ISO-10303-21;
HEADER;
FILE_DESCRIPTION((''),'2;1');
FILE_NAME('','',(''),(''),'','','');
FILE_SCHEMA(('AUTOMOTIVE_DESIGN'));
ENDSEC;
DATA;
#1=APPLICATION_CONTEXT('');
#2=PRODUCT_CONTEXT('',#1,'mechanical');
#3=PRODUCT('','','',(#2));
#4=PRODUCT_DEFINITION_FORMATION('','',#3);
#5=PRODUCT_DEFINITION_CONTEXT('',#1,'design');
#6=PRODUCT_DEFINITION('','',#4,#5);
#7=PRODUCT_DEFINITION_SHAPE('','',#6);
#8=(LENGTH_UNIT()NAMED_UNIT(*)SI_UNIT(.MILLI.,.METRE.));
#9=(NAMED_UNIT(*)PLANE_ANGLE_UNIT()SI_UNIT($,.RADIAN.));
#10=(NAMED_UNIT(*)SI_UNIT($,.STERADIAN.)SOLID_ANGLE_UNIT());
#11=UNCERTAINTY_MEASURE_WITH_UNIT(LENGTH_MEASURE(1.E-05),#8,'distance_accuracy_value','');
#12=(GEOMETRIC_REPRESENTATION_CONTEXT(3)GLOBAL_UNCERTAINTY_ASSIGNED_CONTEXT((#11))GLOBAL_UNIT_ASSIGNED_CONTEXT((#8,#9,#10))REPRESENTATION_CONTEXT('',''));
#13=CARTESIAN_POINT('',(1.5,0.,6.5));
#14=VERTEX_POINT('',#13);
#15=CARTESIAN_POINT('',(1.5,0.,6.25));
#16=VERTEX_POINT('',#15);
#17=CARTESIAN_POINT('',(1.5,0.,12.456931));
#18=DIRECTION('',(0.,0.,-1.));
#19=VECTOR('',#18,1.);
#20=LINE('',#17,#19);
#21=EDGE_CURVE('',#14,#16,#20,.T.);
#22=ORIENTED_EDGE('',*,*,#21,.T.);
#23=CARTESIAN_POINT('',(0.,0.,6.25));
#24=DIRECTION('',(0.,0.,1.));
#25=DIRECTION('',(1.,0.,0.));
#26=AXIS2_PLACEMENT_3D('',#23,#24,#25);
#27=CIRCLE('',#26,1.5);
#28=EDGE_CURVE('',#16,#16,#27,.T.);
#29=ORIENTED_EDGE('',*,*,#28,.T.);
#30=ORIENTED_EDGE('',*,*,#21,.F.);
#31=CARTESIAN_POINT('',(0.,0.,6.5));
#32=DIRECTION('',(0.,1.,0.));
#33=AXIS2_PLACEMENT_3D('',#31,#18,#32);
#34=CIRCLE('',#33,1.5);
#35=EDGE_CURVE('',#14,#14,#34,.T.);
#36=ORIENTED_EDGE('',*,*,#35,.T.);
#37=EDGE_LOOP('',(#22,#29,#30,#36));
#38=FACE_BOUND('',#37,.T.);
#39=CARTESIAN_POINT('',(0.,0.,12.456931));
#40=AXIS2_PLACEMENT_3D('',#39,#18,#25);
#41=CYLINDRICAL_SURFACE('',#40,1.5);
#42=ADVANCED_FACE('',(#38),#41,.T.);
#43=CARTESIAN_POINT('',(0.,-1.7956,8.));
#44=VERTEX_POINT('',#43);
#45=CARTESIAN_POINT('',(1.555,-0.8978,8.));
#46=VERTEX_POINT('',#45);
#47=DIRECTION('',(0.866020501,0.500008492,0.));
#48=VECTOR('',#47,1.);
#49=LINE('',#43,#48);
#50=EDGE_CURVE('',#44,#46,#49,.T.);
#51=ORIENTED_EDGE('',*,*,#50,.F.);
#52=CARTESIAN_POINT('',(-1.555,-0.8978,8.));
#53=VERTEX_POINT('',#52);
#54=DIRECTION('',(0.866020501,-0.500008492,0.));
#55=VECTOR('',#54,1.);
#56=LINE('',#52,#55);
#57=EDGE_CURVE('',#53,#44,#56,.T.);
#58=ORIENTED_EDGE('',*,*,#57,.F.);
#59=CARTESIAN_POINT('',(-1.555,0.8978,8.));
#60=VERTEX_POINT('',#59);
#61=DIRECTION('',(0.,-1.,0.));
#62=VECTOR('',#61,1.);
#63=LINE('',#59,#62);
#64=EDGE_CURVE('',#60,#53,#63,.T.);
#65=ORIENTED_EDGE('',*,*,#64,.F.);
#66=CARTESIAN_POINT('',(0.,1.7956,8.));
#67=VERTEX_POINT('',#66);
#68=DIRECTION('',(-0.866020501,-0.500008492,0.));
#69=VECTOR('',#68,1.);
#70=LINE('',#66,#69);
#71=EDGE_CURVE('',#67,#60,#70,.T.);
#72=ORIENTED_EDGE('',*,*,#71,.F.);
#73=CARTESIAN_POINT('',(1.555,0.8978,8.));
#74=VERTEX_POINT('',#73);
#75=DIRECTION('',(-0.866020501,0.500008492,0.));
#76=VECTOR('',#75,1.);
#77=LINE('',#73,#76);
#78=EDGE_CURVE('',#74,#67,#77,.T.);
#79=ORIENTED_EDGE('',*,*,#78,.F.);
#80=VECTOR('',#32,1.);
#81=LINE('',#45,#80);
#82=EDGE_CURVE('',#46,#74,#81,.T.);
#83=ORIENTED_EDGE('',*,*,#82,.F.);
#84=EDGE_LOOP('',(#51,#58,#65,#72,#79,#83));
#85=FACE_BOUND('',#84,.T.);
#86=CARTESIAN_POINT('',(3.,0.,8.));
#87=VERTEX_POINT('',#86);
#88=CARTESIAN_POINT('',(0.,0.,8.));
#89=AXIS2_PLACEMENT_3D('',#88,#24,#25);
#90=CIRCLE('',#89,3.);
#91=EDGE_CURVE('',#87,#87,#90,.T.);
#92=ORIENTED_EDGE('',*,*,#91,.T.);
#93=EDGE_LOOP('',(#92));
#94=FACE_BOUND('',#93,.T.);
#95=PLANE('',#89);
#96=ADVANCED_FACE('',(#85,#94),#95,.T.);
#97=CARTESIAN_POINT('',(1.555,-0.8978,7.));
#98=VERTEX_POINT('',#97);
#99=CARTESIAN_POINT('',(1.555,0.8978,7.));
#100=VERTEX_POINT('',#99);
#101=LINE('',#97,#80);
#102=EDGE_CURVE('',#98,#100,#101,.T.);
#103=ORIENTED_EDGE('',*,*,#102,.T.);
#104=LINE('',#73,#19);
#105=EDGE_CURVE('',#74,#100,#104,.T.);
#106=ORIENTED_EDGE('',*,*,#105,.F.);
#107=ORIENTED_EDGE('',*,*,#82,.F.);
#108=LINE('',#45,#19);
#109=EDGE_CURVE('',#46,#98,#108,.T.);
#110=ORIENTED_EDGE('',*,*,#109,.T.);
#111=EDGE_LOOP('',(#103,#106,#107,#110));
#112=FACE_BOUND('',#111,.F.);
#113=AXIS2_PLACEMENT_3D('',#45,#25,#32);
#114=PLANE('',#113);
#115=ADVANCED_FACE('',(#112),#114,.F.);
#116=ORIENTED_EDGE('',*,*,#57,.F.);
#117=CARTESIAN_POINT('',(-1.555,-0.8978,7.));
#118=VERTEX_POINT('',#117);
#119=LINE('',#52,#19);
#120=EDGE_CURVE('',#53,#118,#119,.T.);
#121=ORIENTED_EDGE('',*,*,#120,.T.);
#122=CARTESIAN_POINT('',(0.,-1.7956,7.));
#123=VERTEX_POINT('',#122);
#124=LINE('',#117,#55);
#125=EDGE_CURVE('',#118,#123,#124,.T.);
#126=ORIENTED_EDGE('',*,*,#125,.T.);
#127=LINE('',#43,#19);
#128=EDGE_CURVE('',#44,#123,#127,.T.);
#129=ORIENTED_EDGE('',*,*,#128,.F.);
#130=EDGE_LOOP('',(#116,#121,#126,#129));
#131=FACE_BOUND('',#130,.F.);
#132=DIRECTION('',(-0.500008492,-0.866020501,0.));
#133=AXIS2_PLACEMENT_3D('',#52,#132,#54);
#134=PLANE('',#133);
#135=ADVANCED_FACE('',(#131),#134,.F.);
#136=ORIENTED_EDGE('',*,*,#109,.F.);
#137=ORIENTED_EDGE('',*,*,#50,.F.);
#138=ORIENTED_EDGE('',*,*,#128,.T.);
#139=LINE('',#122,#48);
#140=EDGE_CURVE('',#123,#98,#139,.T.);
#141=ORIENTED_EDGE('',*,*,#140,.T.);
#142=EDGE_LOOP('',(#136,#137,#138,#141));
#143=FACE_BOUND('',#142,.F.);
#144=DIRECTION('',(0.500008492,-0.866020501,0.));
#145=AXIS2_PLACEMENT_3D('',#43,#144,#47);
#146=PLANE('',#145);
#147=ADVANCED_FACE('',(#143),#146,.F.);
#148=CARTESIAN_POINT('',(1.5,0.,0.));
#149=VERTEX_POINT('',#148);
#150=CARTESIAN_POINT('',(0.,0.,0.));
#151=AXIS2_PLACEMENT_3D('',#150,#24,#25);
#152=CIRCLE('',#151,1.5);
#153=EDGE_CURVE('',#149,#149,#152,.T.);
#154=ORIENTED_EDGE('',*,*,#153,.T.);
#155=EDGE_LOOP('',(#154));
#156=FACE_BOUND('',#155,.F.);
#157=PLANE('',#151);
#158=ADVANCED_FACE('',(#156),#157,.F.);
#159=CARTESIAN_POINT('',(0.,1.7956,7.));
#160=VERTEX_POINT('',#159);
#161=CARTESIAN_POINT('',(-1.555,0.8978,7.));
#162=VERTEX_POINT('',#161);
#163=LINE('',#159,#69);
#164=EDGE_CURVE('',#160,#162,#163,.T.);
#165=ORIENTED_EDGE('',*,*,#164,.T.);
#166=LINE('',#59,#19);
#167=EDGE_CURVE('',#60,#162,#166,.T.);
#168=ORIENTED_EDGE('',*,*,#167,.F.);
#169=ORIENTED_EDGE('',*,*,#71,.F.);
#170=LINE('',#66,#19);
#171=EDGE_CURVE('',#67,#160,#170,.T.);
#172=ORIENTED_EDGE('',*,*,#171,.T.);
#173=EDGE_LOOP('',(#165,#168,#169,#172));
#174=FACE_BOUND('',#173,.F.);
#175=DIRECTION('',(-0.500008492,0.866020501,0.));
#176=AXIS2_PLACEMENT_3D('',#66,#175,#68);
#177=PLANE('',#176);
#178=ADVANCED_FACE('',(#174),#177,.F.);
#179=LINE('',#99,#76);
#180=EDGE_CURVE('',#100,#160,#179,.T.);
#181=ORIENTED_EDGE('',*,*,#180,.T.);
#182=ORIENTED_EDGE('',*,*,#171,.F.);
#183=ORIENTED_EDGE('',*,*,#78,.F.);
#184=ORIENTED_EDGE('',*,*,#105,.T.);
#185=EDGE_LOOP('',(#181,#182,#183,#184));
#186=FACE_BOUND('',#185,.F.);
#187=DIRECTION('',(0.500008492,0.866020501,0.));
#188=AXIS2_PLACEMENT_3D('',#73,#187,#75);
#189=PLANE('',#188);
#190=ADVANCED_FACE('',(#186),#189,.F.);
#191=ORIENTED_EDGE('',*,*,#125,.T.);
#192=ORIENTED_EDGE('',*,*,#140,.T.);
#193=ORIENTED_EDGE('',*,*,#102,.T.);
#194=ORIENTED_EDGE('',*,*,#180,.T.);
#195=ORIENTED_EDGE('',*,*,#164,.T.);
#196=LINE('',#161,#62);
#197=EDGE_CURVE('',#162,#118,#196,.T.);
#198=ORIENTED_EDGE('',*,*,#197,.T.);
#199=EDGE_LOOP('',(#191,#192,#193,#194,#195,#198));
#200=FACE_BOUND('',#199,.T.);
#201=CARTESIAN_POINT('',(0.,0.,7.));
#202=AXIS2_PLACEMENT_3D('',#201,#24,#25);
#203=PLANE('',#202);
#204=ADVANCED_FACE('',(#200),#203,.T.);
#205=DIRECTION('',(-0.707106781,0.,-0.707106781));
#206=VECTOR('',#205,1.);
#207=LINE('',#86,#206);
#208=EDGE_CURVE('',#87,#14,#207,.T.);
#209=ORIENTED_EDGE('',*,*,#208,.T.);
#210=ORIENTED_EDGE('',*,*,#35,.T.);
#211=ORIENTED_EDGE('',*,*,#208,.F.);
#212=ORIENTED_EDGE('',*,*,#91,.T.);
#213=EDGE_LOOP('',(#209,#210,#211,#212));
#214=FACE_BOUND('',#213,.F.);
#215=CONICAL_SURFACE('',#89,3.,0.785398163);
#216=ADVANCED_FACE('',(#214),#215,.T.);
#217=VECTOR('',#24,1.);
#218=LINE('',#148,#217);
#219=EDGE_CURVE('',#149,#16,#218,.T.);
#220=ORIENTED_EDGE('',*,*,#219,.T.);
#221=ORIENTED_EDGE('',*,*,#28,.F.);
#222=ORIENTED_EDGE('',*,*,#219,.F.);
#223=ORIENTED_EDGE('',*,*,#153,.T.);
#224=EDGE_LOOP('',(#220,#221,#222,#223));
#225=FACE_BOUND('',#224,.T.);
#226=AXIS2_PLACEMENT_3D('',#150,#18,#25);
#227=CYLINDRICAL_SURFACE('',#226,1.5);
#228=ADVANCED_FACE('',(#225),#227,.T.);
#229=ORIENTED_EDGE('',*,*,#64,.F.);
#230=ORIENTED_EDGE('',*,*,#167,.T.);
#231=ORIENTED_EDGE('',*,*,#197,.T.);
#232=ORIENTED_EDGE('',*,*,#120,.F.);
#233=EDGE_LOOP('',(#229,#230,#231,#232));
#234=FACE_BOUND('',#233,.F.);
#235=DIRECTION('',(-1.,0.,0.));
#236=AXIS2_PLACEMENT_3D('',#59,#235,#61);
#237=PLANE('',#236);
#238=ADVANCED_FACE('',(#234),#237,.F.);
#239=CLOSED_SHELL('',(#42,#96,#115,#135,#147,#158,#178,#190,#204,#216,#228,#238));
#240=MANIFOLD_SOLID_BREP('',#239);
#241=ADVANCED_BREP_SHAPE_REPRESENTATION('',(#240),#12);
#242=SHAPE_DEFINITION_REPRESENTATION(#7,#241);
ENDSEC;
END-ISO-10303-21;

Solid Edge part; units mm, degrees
sketch "Sketch1" plane through (0, 0, 0) normal (0, 0, 1) x (1, 0, 0)
  circle A0 centre (0, 0) radius 1.5
extrude "Protrusion1" add sketch "Sketch1" along normal blind 6.25
sketch "Sketch2" plane through (0, 0, 6.25) normal (0, 0, 1) x (1, 0, 0)
  circle A0 centre (0, 0) radius 3
extrude "ExtrudedProtrusion_2" add sketch "Sketch2" along normal blind 1.75
chamfer "Chamfer_1" distance 1.75 angle 45 1 edges at (-3, 0, 6.25)
sketch "Sketch3" plane through (0, 0, 8) normal (0, 0, 1) x (0, 1, 0)
  line L0 (0.8978, -1.555) -> (1.7956, 0)
  line L1 (1.7956, 0) -> (0.8978, 1.555)
  line L2 (0.8978, 1.555) -> (-0.8978, 1.555)
  line L3 (-0.8978, 1.555) -> (-1.7956, 0)
  line L4 (-1.7956, 0) -> (-0.8978, -1.555)
  line L5 (-0.8978, -1.555) -> (0.8978, -1.555)
extrude "ExtrudedCutout_1" cut sketch "Sketch3" against normal blind 1
properties material "Iron, grey cast type 20"
